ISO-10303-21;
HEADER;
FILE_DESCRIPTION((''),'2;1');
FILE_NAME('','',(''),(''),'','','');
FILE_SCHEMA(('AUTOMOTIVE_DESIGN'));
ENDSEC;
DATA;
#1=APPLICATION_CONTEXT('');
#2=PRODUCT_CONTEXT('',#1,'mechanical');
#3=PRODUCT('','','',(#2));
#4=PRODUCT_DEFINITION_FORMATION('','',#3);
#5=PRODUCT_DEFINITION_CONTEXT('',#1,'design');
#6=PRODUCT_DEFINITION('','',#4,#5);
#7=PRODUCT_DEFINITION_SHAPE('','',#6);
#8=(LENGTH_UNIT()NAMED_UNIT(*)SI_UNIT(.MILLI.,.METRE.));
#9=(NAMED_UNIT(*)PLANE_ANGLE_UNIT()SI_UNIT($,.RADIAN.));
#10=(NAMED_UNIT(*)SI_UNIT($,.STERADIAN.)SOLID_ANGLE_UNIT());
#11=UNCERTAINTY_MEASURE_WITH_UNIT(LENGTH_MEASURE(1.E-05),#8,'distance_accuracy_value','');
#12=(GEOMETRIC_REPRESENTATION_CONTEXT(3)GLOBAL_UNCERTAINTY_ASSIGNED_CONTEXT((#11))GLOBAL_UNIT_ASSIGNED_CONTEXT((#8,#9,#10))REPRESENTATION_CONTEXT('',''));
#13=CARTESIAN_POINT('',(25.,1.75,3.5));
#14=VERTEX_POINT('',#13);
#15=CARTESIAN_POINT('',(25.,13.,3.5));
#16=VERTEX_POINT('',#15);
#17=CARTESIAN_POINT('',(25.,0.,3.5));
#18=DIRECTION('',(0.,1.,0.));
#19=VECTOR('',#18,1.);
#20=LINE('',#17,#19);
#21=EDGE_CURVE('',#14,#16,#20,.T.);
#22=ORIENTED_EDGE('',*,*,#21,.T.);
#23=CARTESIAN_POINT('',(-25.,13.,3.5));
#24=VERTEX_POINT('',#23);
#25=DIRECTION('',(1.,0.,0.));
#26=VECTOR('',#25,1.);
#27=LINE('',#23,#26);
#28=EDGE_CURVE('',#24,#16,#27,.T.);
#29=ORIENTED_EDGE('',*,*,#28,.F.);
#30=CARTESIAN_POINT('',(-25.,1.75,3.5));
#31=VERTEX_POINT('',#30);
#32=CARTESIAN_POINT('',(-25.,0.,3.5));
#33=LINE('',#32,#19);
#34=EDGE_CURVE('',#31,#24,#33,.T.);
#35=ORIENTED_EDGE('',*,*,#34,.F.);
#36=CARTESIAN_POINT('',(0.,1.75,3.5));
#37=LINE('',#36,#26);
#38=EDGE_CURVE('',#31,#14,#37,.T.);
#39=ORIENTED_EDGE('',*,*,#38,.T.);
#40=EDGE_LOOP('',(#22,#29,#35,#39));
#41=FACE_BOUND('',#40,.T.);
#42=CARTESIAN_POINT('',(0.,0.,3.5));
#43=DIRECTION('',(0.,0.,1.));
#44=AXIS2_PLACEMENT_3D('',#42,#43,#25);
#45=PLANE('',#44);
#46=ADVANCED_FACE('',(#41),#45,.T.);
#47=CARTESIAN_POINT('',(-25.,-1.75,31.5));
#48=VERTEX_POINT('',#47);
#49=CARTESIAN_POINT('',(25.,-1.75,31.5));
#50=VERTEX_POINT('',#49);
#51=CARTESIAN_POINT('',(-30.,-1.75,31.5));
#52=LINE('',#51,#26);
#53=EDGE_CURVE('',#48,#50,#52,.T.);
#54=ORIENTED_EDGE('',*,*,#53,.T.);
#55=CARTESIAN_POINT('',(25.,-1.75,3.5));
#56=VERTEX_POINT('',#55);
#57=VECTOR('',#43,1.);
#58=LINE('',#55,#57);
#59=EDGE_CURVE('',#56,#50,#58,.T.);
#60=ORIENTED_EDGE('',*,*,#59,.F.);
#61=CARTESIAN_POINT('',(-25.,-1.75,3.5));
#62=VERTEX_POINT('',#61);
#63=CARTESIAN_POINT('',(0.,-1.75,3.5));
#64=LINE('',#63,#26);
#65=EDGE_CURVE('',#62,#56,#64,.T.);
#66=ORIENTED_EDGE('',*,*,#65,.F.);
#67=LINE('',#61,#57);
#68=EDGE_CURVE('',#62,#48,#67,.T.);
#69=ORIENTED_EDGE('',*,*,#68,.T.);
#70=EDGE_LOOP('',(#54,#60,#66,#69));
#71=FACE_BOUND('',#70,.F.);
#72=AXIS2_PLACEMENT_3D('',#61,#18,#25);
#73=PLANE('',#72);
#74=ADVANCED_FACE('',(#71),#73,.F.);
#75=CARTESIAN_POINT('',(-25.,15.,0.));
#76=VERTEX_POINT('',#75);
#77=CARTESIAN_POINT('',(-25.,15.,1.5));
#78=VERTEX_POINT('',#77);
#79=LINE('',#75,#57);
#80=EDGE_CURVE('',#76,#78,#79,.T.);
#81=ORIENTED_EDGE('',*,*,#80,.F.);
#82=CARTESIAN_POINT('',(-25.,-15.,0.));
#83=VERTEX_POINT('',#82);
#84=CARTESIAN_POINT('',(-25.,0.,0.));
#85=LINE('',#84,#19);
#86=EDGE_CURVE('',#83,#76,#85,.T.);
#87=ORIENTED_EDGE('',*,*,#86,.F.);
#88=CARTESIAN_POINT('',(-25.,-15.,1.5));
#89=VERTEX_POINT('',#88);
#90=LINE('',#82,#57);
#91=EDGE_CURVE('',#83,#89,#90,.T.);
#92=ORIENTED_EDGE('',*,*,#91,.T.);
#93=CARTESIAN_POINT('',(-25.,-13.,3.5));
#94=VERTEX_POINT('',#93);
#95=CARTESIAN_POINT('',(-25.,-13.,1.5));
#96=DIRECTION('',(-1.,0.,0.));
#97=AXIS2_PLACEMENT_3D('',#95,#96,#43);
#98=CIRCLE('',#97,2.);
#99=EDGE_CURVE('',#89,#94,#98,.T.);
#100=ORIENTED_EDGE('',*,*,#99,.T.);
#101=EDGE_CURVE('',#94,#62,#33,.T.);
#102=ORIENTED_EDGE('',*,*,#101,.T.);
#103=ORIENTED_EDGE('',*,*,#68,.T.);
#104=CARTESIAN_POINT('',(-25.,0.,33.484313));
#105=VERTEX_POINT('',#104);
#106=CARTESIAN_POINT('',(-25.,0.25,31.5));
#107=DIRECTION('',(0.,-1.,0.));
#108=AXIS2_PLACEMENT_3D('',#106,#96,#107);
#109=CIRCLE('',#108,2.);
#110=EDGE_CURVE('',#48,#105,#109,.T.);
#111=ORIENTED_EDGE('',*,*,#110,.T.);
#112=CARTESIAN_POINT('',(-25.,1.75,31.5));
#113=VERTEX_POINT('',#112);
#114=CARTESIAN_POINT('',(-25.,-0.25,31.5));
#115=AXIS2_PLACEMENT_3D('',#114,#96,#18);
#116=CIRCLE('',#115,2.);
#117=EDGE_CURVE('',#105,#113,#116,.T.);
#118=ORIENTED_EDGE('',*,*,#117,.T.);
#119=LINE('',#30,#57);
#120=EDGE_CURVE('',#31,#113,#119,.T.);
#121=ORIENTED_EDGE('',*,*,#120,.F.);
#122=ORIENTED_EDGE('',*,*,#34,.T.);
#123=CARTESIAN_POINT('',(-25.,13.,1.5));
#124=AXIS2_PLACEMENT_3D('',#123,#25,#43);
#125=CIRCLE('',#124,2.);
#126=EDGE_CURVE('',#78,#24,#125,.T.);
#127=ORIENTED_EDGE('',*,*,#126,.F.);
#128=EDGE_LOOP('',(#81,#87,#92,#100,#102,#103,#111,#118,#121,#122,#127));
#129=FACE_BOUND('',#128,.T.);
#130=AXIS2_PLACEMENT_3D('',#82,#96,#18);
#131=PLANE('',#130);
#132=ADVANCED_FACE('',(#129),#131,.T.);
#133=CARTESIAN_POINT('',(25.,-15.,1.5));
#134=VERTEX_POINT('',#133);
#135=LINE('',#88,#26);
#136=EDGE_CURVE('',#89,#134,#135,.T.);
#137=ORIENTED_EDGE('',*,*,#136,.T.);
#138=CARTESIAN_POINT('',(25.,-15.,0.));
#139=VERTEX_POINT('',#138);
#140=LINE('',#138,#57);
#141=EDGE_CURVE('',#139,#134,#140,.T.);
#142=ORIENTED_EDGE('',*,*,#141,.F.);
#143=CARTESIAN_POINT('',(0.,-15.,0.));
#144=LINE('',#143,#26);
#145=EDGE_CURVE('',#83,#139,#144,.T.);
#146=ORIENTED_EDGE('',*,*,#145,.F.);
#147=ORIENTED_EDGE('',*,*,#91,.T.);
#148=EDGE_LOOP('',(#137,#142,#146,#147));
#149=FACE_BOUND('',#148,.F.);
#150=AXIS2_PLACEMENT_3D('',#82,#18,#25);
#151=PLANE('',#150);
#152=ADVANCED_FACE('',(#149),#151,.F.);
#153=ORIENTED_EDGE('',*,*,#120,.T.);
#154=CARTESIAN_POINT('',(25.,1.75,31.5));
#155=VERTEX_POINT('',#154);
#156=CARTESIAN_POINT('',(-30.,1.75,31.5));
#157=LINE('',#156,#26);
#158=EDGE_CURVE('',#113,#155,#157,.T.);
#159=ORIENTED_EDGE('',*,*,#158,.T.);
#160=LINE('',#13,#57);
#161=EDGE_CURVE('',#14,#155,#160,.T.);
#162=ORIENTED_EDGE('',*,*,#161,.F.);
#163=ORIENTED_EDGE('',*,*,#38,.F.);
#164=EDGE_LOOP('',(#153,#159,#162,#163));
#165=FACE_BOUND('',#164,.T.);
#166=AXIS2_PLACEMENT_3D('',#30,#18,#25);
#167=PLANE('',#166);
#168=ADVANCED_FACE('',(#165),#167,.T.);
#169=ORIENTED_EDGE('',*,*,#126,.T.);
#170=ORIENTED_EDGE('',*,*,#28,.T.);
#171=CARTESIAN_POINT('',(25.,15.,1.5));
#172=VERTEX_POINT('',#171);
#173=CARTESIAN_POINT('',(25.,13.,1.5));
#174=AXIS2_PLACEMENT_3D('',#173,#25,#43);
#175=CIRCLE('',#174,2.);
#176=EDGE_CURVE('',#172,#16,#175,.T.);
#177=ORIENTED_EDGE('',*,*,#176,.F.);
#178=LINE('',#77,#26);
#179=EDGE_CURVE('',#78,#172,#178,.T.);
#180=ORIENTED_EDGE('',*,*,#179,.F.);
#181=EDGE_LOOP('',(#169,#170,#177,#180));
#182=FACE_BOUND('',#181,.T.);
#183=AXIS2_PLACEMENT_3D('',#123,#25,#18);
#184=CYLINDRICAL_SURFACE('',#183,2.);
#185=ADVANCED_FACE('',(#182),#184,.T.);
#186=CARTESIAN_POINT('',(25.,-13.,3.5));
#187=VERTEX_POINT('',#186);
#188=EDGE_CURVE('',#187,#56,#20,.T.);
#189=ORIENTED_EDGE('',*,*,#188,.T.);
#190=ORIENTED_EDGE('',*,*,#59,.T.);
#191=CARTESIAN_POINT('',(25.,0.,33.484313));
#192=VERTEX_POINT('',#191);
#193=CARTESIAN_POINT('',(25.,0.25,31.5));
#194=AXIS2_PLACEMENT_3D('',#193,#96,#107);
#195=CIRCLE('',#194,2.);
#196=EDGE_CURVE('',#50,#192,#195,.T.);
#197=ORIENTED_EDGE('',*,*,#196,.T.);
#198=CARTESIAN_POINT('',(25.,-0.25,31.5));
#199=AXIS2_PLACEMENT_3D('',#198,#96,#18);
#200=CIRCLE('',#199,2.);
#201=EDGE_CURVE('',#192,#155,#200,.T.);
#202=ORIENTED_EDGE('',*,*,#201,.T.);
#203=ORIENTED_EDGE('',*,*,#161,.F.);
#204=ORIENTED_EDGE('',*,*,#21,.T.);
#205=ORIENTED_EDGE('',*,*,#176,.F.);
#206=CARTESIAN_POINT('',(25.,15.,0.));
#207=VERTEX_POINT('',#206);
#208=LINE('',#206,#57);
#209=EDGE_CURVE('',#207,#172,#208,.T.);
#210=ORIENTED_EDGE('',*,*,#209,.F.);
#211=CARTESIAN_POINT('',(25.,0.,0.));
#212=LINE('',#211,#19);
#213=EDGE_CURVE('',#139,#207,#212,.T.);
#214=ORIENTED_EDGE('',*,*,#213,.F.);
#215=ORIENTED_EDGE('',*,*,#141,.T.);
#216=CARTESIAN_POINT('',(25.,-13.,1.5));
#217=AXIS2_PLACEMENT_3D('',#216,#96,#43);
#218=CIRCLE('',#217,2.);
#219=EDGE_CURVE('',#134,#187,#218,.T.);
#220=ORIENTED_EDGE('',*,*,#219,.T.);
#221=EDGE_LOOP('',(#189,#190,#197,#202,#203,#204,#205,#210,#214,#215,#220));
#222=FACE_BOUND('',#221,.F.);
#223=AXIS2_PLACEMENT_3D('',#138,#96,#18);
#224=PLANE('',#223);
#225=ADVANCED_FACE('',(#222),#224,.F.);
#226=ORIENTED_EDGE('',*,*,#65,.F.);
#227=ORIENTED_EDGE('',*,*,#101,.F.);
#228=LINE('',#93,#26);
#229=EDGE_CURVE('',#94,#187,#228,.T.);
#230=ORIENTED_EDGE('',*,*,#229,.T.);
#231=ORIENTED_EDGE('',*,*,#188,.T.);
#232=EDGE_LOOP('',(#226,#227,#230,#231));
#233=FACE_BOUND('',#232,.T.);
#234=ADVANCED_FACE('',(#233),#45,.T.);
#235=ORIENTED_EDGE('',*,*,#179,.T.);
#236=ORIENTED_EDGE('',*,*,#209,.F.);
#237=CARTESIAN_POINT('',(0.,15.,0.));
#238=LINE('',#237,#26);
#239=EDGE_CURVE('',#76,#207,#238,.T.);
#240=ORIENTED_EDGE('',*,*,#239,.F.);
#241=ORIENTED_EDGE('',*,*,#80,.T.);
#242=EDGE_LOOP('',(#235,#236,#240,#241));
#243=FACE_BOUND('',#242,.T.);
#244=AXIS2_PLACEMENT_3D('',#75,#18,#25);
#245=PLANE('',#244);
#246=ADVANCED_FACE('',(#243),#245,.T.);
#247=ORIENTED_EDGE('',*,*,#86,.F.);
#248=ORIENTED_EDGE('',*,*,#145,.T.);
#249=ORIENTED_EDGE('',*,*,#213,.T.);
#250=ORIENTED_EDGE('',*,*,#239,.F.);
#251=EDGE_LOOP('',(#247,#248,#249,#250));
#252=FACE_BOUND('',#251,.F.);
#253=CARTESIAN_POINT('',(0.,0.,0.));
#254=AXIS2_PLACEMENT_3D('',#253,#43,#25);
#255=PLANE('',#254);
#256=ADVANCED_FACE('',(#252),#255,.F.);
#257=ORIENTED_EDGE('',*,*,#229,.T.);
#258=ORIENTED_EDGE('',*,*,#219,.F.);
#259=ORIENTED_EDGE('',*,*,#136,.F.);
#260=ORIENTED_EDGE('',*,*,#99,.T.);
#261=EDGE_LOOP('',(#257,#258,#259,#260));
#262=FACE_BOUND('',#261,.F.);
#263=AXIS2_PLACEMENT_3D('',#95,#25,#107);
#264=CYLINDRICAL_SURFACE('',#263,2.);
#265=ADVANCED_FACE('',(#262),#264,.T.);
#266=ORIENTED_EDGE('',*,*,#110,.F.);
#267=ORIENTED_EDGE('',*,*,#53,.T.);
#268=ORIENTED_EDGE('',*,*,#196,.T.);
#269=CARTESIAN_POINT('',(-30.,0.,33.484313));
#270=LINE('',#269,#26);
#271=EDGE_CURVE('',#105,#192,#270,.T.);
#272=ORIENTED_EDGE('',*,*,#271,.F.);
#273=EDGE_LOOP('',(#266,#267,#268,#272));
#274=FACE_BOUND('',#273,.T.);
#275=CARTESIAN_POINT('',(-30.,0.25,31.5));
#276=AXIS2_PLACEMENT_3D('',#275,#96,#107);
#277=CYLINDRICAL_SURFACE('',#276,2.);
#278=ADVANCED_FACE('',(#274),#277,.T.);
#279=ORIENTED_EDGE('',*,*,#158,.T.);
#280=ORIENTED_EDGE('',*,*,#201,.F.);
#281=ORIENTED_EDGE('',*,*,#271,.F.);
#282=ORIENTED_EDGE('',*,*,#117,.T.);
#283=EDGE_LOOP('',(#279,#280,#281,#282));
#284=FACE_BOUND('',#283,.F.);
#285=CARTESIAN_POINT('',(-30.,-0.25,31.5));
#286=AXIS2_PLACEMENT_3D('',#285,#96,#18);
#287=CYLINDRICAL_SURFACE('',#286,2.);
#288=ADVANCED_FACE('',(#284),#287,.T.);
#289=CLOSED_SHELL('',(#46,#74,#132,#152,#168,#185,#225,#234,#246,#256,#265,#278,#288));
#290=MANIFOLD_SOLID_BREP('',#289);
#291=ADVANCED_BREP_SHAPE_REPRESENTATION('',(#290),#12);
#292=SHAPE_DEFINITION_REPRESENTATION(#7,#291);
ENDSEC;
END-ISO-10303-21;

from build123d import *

# Parameters (mm, degrees)
F0_W        = 50
F0_H        = 30
F1_DEPTH    = 3.5
F2_R        = 2
F3_W        = 50
F3_H        = 3.5
F4_DEPTH    = 30
F5_T1_DEPTH = 60


# Not quite as in the source:
# - a fillet or chamfer that OpenCascade refuses, or shapes differently, is made with other operations: its cross-section is extruded or revolved along the edge and cut away or added


with BuildPart() as f1:
    # F0 (on Top) → F1 (new body)
    with BuildSketch(Plane.XY):
        Rectangle(F0_W, F0_H)
    extrude(amount=F1_DEPTH)

    # F2
    f2_edges = [f1.edges().sort_by_distance(p)[0] for p in [
        (0, 15, 3.5),
        (0, -15, 3.5),
    ]]
    fillet(f2_edges, radius=F2_R)

    # F3 (on face) → F4 (join)
    with BuildSketch(Plane.XY.offset(3.5)):
        Rectangle(F3_W, F3_H)
    extrude(amount=F4_DEPTH)

    # F5: fillet of radius 2 on 2 edges, made by hand

    # F5_s2 → F5_t1 (cut)
    with BuildSketch(Plane.YZ.offset(-30)):
        with BuildLine():
            ThreePointArc((-1.75, 31.5), (-1.1642135624, 32.9142135624), (0.25, 33.5))
            Line((0.25, 33.5), (-1.75, 33.5))
            Line((-1.75, 33.5), (-1.75, 31.5))
        make_face()
        with BuildLine():
            ThreePointArc((1.75, 31.5), (1.1642135624, 32.9142135624), (-0.25, 33.5))
            Line((-0.25, 33.5), (1.75, 33.5))
            Line((1.75, 33.5), (1.75, 31.5))
        make_face()
    extrude(amount=F5_T1_DEPTH, mode=Mode.SUBTRACT)


solid = f1.part
